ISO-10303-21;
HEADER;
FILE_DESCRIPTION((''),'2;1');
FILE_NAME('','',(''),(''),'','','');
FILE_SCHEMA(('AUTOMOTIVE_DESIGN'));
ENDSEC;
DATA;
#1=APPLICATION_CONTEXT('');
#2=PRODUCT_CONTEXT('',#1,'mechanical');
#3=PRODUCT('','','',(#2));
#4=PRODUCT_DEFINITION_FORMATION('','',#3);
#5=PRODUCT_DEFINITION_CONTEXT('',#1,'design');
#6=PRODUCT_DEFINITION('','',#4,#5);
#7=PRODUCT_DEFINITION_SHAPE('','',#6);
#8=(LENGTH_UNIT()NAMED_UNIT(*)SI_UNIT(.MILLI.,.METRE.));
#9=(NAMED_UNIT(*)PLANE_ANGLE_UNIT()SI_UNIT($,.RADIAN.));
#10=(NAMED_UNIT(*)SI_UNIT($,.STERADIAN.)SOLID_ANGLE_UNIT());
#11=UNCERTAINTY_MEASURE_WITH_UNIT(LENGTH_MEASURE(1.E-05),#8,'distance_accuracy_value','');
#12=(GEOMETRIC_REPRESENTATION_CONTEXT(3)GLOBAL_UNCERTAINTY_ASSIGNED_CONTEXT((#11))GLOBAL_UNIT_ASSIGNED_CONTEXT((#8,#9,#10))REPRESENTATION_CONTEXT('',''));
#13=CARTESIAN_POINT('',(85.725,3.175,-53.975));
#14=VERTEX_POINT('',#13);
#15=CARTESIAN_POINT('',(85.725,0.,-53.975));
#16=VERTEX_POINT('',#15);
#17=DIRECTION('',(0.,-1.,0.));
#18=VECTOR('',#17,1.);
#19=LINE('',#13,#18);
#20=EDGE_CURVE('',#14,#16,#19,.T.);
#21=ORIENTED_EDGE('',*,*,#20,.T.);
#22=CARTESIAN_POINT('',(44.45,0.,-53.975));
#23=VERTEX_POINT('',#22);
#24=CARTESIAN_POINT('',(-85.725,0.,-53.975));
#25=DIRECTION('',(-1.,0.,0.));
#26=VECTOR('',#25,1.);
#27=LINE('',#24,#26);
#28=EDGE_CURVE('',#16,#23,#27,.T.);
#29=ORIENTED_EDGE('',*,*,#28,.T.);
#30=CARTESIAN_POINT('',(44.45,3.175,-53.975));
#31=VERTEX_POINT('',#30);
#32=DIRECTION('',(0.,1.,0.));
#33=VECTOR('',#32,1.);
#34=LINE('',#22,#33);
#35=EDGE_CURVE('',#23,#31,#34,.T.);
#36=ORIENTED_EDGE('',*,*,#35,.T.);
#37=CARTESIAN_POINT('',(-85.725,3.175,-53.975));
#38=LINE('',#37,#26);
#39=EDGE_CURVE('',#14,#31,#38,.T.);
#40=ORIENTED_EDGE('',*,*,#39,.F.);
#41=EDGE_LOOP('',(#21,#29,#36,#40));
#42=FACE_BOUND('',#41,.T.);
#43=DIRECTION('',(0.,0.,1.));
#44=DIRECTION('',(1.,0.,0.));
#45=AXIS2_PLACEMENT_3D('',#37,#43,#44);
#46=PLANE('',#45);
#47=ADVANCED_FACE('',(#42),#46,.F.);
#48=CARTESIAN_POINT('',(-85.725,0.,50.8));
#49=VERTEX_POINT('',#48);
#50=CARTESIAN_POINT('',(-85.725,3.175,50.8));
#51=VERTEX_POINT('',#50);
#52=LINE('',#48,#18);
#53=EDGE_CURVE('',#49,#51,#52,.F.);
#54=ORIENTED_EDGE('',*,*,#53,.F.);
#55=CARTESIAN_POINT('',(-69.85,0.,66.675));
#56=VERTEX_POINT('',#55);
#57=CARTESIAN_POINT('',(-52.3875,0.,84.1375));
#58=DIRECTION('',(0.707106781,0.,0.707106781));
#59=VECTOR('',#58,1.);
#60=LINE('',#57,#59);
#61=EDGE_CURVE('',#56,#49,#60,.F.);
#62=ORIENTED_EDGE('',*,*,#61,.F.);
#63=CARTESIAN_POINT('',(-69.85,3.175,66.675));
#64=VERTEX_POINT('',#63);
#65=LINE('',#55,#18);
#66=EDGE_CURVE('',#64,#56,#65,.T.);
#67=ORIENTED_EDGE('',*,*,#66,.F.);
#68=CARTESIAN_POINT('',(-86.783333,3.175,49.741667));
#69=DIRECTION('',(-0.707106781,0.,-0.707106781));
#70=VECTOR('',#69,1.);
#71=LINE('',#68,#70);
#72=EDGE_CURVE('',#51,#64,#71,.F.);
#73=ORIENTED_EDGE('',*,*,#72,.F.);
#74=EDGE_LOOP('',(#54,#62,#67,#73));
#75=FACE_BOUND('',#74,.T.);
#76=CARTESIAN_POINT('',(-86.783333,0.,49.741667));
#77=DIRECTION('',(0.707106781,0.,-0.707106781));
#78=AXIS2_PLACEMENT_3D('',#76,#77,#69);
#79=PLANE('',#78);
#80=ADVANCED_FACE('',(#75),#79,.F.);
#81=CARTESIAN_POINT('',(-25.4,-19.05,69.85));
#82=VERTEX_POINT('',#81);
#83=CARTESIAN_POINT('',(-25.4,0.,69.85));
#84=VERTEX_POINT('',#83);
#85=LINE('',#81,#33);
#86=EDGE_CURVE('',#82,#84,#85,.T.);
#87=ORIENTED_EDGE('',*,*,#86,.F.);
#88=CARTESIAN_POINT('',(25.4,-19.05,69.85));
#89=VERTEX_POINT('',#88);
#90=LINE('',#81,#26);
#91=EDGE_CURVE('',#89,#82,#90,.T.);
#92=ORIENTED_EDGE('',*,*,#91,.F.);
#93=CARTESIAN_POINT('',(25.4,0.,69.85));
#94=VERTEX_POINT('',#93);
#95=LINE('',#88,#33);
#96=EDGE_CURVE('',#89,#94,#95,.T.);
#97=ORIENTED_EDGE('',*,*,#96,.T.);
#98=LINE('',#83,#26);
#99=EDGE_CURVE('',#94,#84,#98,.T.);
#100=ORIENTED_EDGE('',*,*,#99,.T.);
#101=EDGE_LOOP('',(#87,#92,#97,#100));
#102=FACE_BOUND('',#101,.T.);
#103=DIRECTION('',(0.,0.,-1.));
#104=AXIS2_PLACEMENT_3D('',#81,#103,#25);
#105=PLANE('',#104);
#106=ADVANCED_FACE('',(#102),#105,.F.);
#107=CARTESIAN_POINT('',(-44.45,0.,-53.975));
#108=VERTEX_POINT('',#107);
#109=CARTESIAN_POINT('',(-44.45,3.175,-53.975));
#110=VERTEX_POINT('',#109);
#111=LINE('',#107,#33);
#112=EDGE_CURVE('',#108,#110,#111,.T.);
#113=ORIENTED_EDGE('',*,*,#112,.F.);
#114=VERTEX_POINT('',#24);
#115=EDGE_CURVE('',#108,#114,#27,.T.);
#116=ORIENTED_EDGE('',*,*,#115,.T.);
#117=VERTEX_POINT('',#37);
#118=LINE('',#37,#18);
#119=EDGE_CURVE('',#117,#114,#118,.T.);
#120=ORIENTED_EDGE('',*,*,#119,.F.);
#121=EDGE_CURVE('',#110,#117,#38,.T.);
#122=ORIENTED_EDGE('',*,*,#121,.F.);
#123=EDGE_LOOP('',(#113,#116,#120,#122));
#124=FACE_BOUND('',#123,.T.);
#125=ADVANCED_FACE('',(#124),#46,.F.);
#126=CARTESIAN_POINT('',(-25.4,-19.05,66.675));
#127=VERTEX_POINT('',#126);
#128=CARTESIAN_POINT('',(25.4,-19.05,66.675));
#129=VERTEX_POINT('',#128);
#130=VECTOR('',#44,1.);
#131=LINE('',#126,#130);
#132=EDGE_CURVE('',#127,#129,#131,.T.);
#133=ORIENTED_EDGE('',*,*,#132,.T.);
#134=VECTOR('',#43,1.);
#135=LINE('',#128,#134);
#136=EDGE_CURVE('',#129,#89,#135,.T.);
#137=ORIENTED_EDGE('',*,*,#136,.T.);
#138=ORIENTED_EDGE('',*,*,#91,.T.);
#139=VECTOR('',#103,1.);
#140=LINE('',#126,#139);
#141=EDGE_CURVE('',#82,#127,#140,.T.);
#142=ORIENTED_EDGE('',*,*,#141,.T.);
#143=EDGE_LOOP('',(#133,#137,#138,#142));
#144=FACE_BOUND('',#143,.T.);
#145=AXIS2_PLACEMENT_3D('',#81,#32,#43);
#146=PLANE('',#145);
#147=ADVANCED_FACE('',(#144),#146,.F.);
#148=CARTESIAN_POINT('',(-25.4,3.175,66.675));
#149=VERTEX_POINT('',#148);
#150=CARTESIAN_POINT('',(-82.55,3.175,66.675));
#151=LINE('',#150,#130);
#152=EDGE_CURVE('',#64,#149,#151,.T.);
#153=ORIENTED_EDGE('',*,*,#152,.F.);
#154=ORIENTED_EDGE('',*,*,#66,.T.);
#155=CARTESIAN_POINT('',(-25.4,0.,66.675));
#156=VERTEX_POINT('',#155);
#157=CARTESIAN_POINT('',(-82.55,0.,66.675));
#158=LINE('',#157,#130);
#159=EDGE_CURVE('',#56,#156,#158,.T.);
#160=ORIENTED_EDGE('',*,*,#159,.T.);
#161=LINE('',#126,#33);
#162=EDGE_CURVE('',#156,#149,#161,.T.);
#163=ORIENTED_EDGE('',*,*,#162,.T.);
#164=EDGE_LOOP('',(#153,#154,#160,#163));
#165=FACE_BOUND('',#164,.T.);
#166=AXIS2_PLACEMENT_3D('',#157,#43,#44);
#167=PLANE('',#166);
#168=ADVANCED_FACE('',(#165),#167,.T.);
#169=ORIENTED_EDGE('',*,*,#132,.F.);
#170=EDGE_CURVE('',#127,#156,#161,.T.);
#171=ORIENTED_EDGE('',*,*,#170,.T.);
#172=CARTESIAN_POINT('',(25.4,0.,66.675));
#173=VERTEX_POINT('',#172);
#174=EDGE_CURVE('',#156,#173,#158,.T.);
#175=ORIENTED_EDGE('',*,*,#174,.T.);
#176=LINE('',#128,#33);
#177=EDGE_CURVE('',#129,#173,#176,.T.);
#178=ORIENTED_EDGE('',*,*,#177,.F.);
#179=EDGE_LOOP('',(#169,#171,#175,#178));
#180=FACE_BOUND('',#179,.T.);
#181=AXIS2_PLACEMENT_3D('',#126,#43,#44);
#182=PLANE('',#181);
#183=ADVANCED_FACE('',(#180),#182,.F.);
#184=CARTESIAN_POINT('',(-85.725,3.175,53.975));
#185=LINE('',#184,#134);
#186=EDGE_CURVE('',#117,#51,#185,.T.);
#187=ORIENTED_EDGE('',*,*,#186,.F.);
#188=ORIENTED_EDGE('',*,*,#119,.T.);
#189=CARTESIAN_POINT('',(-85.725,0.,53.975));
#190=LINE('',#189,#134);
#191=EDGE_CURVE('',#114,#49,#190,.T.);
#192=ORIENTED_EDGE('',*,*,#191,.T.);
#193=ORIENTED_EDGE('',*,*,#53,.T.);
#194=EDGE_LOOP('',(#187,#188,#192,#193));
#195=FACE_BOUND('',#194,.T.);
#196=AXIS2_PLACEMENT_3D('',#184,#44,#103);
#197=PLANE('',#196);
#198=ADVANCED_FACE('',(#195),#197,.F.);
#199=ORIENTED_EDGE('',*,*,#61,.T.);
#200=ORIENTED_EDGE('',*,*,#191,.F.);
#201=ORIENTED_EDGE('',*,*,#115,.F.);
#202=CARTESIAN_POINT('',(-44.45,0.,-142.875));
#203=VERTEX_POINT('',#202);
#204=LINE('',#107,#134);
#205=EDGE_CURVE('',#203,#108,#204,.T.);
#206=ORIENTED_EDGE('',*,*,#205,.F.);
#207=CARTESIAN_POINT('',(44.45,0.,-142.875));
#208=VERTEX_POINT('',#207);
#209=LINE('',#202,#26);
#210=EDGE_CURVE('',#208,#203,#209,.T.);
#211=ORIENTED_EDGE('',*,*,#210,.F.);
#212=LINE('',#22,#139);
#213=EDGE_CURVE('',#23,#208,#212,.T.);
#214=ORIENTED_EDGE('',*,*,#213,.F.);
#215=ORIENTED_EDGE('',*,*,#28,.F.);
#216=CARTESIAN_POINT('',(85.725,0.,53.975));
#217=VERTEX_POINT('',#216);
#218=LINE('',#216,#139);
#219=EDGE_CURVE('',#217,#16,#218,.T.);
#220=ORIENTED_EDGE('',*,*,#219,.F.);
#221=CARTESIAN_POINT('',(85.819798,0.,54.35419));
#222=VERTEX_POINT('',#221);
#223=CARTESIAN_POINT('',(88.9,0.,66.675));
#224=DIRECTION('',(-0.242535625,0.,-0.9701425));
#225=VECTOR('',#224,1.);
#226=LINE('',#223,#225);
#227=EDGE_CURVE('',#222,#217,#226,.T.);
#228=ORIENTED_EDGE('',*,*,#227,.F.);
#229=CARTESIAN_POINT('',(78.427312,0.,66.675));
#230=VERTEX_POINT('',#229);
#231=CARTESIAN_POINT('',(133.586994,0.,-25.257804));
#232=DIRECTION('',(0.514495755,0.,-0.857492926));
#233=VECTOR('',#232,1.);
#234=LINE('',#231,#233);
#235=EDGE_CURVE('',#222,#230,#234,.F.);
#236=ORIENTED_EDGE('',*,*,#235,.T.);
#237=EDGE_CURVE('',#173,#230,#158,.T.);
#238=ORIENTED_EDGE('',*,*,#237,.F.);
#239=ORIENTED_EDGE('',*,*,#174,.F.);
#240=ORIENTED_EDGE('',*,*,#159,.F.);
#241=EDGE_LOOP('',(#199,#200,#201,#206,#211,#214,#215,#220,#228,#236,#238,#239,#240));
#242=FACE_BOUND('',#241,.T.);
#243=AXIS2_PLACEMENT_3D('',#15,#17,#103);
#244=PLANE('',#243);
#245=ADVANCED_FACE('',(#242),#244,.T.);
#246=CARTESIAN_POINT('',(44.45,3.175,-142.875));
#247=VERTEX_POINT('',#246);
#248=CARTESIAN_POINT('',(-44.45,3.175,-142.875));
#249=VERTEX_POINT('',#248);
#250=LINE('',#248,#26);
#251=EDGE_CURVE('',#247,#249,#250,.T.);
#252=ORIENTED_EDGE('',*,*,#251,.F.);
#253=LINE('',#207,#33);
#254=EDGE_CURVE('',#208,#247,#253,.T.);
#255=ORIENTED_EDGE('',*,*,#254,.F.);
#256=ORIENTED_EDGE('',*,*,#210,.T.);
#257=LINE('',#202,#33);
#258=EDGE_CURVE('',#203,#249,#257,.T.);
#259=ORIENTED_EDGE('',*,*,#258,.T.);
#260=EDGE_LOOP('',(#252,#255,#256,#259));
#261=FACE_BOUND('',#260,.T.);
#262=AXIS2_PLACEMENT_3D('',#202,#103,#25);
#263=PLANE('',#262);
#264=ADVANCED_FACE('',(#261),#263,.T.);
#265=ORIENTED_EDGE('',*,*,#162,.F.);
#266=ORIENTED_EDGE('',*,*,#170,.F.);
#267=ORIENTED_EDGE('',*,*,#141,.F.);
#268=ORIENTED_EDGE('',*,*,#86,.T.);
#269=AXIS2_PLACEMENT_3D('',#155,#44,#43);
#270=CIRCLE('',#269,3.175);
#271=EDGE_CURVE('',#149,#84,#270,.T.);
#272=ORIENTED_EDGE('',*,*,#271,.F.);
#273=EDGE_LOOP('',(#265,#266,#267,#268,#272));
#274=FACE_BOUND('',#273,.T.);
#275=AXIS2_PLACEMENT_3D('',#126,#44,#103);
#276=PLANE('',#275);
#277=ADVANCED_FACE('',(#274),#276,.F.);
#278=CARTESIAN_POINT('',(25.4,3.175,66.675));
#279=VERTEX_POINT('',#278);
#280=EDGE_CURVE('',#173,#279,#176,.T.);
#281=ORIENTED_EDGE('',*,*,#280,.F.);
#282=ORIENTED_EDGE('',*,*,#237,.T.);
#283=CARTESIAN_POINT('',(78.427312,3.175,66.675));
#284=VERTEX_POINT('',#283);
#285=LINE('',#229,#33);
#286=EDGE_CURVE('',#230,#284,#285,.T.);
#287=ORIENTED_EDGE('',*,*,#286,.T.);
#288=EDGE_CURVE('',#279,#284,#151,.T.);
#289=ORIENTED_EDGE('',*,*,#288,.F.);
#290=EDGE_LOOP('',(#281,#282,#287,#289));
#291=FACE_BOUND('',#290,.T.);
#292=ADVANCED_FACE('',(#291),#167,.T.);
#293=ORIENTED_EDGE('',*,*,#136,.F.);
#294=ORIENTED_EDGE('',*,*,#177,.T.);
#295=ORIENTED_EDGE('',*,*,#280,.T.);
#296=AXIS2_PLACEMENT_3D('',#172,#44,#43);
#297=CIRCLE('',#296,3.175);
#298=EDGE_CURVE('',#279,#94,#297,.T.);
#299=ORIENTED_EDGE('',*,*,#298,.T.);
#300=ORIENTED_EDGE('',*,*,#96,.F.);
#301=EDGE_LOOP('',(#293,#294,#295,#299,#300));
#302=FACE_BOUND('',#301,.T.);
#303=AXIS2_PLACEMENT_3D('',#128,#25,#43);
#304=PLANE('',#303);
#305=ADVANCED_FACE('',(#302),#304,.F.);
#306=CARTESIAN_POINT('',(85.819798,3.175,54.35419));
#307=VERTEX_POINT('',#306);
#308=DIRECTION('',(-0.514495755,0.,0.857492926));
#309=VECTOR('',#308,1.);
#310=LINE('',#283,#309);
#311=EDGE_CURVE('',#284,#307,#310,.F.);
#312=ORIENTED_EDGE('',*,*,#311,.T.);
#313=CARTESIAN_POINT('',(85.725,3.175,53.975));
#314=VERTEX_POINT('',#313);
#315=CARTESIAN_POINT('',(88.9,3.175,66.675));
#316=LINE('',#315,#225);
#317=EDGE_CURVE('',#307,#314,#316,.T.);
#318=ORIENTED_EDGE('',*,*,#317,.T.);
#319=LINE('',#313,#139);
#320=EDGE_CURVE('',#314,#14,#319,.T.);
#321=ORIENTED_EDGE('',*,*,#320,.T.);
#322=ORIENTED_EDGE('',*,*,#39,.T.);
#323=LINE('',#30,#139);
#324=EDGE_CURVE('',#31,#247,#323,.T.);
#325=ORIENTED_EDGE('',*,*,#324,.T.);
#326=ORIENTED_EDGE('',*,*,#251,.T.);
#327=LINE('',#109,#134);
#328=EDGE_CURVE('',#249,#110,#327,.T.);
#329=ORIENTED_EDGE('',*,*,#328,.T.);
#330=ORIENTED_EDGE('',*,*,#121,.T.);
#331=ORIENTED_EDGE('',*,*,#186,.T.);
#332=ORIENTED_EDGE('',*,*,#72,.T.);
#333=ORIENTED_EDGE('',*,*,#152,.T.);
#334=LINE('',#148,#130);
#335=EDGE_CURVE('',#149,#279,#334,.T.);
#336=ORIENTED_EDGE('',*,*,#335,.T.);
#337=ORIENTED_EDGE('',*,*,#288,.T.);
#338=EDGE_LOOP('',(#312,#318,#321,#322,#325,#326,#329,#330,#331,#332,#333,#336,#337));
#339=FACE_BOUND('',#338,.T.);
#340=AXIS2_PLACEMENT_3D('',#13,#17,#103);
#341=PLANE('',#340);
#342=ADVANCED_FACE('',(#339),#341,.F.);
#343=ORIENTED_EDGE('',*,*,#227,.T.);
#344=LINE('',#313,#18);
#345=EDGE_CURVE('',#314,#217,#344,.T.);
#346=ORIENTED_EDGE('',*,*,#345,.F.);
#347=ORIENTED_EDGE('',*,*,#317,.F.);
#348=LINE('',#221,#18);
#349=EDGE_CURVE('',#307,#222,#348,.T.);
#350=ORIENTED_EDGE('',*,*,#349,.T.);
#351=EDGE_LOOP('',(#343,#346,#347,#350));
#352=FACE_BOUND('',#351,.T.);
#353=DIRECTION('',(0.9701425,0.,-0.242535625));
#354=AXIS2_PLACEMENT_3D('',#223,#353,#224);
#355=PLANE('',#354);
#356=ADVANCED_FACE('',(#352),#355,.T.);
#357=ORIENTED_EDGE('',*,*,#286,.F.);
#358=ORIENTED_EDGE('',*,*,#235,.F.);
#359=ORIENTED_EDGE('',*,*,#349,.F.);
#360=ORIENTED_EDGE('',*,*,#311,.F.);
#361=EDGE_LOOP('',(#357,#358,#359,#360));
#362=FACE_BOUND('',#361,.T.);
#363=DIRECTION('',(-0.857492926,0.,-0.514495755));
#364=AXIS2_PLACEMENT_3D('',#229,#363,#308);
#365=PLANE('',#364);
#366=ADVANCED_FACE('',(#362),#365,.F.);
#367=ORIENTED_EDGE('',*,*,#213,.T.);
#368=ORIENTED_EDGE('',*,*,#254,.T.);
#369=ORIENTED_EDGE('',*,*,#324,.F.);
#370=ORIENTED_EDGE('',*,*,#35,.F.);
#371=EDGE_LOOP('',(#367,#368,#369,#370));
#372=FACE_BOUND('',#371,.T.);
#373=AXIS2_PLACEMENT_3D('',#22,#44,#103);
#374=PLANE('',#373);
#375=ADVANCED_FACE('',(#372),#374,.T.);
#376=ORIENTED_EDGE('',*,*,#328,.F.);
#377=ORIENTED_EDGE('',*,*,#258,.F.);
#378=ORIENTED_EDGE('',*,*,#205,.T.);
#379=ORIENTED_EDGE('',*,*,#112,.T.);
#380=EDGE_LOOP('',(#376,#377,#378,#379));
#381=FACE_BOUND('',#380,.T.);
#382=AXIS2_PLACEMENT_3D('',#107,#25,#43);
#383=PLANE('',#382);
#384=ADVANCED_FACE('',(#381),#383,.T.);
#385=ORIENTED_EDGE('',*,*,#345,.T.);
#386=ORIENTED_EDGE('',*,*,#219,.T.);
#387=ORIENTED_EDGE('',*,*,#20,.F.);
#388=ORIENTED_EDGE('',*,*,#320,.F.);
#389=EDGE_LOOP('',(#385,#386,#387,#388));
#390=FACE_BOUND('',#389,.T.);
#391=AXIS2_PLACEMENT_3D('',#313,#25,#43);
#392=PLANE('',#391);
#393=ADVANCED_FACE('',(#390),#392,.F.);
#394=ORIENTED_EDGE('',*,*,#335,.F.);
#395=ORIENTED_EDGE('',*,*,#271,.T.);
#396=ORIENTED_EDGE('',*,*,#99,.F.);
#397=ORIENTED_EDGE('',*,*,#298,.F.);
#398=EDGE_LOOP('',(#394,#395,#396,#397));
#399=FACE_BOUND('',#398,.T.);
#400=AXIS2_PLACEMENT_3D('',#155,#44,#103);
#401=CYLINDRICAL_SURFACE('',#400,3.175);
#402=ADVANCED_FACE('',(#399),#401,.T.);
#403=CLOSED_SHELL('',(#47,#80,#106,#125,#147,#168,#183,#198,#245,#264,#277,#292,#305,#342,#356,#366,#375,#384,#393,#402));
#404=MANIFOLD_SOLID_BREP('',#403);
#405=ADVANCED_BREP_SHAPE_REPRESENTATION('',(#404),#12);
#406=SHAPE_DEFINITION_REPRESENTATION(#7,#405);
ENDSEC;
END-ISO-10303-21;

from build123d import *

# Parameters (mm, degrees)
SKETCH1_W           = 171.45
SKETCH1_H           = 107.95
BOSS_EXTRUDE1_DEPTH = 3.175
BOSS_EXTRUDE2_DEPTH = 3.175
SKETCH4_W           = 50.8
SKETCH4_H           = 3.175
BOSS_EXTRUDE3_DEPTH = 19.05
CHAMFER1_SIZE       = 12.7
CHAMFER1_SIZE_2     = 10.472688289
CHAMFER1_SIZE_3     = 17.454480482
SKETCH6_W           = 88.9
SKETCH6_H           = 88.9
BOSS_EXTRUDE4_DEPTH = 3.175
BOSS_EXTRUDE7_DEPTH = 50.8


with BuildPart() as part:
    # Sketch1 → Boss-Extrude1 (new body)
    with BuildSketch(Plane(origin=(0, 0, 0), x_dir=(1, 0, 0), z_dir=(0, 1, 0))):
        Rectangle(SKETCH1_W, SKETCH1_H)
    extrude(amount=BOSS_EXTRUDE1_DEPTH)

    # Sketch2 → Boss-Extrude2 (add)
    with BuildSketch(Plane(origin=(0, 3.175, 0), x_dir=(1, 0, 0), z_dir=(0, 1, 0))):
        Polygon((-85.725, -53.975), (-82.55, -66.675), (88.9, -66.675), (85.725, -53.975), align=None)
    extrude(amount=-BOSS_EXTRUDE2_DEPTH)

    # Chamfer1
    # the kernel refuses this chamfer: 17.454480482, 12.7, 10.472688289 mm, written as the material it takes off along each edge
    with BuildSketch(Plane(origin=(88.9, 35.835373947, 66.675), x_dir=(-0.21576900793941634, 0, -0.9764444352920651), z_dir=(0, -1, 0))) as chamfer1_piece_1:
        Polygon((CHAMFER1_SIZE * 0.999621916911, -CHAMFER1_SIZE * 0.0274958766106), (CHAMFER1_SIZE_2 * 0.215769007941, -CHAMFER1_SIZE_2 * 0.976444435298), (0, 0), align=None)
    extrude(amount=68.495747894, mode=Mode.SUBTRACT)
    with BuildSketch(Plane(origin=(-82.55, 48.316843842, 66.675), x_dir=(0.9993006642791182, 0, 0.0373922768939412), z_dir=(0, -1, 0))) as chamfer1_piece_2:
        Polygon((CHAMFER1_SIZE * 0.999300664279, -CHAMFER1_SIZE * 0.0373922768939), (-CHAMFER1_SIZE_3 * 0.278641848199, -CHAMFER1_SIZE_3 * 0.960395085581), (0, 0), align=None)
    extrude(amount=93.458687684, mode=Mode.SUBTRACT)

    # Sketch6 → Boss-Extrude4 (add)
    with BuildSketch(Plane(origin=(0, 3.175, 0), x_dir=(1, 0, 0), z_dir=(0, 1, 0))):
        with Locations((0, 98.425)):
            Rectangle(SKETCH6_W, SKETCH6_H)
    extrude(amount=-BOSS_EXTRUDE4_DEPTH)



with BuildPart() as body_2:
    # Sketch4 → Boss-Extrude3 (new body)
    with BuildSketch(Plane.XZ):
        with Locations((0, 68.2625)):
            Rectangle(SKETCH4_W, SKETCH4_H)
    extrude(amount=BOSS_EXTRUDE3_DEPTH)


with BuildPart() as part_1:
    add(part.part)

    add(body_2.part)  # Boss-Extrude7 merges body 2
    # Sketch10 → Boss-Extrude7 (add)
    with BuildSketch(Plane(origin=(25.4, 0, 0), x_dir=(0, 0, -1), z_dir=(1, 0, 0))):
        with BuildLine():
            Line((-66.675, 3.175), (-66.675, 0))
            Line((-66.675, 0), (-69.85, 0))
            ThreePointArc((-69.85, 0), (-68.92006403, 2.24506403), (-66.675, 3.175))
        make_face()
    extrude(amount=-BOSS_EXTRUDE7_DEPTH)


solid = part_1.part
